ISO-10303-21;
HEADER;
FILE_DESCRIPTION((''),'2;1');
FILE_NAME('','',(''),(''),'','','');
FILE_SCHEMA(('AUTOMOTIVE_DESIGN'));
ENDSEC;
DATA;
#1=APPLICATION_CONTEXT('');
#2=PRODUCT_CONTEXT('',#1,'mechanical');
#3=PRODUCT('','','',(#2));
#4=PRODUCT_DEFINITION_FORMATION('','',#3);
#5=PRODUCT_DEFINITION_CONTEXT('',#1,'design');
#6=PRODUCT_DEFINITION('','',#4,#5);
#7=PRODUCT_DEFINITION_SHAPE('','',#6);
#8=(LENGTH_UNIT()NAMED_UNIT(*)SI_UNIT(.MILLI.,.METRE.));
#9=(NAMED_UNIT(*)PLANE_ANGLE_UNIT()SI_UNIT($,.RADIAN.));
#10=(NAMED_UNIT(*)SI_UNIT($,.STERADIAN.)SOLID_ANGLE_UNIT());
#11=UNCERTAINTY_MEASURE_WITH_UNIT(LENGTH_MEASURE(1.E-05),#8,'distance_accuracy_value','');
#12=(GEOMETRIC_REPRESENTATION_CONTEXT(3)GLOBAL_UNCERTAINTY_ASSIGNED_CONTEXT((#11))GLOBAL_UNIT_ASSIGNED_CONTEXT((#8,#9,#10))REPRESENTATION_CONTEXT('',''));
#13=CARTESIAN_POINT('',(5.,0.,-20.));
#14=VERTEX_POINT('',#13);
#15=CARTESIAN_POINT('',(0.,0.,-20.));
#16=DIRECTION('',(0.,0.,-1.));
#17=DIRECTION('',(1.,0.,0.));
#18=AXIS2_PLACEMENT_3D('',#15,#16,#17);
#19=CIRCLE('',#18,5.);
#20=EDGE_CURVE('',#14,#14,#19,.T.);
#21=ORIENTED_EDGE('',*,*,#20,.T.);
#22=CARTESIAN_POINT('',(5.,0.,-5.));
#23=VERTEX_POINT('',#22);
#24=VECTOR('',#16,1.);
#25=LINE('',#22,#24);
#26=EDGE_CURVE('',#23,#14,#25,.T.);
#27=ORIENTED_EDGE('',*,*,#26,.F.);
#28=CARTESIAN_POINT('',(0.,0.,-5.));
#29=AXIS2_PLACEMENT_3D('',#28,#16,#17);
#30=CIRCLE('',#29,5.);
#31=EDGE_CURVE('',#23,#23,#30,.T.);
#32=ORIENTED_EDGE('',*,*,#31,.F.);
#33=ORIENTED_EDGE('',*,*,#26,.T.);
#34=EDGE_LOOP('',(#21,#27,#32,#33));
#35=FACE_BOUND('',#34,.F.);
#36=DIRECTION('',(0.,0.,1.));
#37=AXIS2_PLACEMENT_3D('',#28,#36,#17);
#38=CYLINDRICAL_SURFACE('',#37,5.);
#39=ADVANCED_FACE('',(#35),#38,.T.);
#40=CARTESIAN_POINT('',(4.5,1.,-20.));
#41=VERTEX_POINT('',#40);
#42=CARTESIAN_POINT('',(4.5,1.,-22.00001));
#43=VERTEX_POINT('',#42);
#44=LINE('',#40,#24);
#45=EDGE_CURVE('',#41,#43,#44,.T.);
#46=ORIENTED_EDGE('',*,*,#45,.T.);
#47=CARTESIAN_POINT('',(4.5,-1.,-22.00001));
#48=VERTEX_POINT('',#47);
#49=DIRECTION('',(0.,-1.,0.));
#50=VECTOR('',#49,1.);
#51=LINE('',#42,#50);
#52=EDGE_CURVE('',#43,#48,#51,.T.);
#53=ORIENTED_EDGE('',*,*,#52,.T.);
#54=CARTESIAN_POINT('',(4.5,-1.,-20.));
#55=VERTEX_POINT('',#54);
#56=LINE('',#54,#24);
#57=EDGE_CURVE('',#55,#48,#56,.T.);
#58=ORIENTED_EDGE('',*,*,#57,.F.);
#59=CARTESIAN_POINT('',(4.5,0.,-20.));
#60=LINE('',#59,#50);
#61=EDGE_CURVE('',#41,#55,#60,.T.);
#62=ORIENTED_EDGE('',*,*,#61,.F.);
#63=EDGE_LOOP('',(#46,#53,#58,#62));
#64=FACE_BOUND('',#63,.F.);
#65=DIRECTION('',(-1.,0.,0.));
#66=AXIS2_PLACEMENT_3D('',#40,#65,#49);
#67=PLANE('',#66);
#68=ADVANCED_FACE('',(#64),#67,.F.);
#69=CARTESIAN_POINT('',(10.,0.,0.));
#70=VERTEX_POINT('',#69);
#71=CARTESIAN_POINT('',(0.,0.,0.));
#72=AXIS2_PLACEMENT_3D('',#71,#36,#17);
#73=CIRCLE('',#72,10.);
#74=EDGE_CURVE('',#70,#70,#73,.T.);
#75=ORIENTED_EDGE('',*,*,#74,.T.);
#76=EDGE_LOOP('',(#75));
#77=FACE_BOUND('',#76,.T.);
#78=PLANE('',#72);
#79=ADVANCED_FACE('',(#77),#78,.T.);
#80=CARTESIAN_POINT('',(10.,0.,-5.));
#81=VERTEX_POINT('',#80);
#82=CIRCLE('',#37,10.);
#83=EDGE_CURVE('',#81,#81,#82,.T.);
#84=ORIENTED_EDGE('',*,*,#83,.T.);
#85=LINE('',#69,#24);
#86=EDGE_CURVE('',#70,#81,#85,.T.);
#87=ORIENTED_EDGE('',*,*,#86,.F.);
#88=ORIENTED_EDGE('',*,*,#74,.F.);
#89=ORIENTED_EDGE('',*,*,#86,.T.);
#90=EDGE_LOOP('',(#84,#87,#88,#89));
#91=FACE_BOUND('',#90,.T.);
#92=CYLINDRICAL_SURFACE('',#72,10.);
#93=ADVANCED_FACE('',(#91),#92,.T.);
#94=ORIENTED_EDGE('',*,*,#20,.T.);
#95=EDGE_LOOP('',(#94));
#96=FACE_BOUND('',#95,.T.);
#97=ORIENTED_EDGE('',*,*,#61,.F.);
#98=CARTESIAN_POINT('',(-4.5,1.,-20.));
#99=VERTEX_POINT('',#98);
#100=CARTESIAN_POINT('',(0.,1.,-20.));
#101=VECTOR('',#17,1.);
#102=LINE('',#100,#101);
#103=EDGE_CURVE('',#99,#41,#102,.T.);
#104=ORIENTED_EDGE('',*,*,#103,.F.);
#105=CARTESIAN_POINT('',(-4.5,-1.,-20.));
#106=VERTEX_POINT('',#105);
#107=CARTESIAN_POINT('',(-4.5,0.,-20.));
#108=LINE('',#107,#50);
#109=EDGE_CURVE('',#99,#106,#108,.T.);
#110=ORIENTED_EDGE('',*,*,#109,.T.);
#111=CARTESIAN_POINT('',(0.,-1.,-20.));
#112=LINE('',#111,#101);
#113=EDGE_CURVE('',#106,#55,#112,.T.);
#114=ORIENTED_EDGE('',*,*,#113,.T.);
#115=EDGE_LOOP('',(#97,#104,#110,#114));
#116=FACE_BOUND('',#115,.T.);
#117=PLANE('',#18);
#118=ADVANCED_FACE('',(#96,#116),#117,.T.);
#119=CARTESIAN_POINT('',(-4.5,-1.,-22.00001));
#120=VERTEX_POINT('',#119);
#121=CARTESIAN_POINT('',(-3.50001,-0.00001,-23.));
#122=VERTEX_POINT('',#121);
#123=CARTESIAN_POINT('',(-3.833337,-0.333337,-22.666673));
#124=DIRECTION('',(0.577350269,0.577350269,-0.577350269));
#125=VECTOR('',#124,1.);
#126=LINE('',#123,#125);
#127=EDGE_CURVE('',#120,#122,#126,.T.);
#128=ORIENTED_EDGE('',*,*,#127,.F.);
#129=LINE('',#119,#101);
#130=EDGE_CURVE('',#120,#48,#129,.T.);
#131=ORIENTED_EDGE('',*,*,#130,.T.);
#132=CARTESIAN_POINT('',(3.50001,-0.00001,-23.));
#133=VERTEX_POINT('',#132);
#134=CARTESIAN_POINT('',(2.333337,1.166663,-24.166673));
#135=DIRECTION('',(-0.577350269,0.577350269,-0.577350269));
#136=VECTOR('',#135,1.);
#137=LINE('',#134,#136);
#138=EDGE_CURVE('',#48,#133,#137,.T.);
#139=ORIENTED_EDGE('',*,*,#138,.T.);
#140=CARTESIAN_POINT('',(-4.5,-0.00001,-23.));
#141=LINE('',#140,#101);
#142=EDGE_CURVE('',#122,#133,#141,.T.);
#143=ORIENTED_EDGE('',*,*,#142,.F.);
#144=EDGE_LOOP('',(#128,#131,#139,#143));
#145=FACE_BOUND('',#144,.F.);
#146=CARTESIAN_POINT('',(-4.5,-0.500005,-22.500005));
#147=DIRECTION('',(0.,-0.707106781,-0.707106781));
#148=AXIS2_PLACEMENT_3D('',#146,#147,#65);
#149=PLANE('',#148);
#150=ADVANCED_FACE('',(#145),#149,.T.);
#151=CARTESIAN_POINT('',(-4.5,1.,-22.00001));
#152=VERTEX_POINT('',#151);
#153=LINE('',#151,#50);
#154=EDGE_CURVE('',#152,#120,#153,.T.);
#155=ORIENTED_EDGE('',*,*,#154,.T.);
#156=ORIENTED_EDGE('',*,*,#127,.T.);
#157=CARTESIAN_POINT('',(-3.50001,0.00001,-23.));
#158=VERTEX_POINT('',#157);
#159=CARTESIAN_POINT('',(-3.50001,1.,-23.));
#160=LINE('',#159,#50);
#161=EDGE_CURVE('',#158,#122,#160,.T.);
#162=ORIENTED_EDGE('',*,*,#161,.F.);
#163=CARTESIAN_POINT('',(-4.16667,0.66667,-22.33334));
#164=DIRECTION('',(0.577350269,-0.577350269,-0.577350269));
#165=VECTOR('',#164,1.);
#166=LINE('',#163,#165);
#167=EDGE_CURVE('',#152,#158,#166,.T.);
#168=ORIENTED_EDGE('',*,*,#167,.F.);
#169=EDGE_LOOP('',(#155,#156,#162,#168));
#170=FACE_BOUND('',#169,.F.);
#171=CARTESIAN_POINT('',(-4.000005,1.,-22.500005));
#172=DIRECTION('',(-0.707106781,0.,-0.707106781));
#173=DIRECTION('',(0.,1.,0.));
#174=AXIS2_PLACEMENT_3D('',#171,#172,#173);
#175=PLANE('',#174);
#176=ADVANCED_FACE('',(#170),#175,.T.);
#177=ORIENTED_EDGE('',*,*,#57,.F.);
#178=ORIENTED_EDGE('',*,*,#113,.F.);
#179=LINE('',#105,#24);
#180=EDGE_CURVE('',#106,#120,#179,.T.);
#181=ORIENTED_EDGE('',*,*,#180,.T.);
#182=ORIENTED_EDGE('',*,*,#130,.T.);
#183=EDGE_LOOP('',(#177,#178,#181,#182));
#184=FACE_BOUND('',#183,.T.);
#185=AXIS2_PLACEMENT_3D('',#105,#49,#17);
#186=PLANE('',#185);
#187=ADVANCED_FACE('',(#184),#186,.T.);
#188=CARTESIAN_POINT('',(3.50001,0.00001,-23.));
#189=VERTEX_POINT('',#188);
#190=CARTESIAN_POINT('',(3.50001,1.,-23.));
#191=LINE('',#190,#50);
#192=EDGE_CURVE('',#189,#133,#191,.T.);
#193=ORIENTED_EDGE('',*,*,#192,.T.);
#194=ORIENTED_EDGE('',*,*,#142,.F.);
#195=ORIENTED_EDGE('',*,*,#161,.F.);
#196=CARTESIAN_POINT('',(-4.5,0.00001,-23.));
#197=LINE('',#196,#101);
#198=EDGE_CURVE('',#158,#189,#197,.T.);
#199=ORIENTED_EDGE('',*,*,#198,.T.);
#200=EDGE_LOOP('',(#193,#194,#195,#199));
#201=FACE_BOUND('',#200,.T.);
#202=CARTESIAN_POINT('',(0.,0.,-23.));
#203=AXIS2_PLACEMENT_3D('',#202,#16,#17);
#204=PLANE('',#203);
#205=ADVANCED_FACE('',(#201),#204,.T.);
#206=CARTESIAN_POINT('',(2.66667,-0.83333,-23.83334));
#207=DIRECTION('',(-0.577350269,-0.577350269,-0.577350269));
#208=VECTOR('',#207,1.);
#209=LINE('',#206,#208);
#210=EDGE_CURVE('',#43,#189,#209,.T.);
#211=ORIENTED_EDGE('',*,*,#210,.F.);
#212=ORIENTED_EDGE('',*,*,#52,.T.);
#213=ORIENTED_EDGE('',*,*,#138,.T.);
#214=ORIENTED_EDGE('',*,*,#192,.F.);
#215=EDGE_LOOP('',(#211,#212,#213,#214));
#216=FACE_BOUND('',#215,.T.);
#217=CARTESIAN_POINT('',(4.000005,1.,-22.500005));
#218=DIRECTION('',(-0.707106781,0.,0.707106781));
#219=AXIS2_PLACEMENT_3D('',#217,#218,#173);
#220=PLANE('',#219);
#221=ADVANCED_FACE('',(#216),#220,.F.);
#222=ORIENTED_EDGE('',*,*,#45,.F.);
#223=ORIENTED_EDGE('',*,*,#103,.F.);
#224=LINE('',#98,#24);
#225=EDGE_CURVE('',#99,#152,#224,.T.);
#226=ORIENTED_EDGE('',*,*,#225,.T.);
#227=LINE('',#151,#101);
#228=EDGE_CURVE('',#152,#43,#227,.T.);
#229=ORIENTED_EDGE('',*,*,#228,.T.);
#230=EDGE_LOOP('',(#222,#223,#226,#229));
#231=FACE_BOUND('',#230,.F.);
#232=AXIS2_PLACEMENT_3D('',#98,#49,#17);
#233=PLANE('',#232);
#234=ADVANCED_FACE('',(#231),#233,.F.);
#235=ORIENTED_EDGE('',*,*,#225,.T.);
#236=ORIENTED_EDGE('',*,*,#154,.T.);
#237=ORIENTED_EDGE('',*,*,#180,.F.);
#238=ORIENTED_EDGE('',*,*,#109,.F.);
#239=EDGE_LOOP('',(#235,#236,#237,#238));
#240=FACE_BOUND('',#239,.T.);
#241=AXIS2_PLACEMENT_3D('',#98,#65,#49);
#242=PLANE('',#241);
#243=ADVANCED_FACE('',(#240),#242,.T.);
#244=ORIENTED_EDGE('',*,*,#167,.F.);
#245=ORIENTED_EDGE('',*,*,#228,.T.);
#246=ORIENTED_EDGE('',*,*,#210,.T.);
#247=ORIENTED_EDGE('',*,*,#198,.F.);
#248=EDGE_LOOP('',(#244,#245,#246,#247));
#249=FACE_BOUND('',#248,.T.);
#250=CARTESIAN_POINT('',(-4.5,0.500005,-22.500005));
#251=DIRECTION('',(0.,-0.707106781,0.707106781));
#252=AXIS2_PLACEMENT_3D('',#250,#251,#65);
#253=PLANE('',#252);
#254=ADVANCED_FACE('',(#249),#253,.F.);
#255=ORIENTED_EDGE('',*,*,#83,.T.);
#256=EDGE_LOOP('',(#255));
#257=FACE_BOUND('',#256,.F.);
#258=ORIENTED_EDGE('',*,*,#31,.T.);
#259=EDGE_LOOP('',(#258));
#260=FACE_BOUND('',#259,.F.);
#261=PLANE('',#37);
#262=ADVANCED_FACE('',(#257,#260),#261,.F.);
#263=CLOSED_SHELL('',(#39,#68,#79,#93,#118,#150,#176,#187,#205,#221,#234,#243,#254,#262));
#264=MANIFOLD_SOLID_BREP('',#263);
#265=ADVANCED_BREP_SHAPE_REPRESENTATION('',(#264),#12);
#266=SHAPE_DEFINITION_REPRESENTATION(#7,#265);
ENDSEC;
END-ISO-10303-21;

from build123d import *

# Parameters (mm, degrees)
F0_R     = 10
F1_DEPTH = 5
F2_R     = 5
F3_DEPTH = 15
F4_W     = 9
F4_H     = 2
F5_DEPTH = 3
F6_SIZE  = 0.99999


# Not quite as in the source:
# - a fillet or chamfer is up to 0.001 mm smaller than in the source, because OpenCascade refuses the exact size


with BuildPart() as f1:
    # F0 (on Top) → F1 (new body)
    with BuildSketch(Plane.XY):
        Circle(F0_R)
    extrude(amount=-F1_DEPTH)

    # F2 (on face) → F3 (join)
    with BuildSketch(Plane(origin=(0, 0, -5), x_dir=(1, 0, 0), z_dir=(0, 0, -1))):
        Circle(F2_R)
    extrude(amount=F3_DEPTH)

    # F4 (on face) → F5 (join)
    with BuildSketch(Plane(origin=(0, 0, -20), x_dir=(1, 0, 0), z_dir=(0, 0, -1))):
        Rectangle(F4_W, F4_H)
    extrude(amount=F5_DEPTH)

    # F6 (size 1 in the source; OpenCascade refuses exactly that, so slightly less here)
    f6_edges = [f1.edges().sort_by_distance(p)[0] for p in [
        (0, -1, -23),
        (-4.5, 0, -23),
        (0, 1, -23),
        (4.5, 0, -23),
    ]]
    chamfer(f6_edges, length=F6_SIZE)


solid = f1.part
